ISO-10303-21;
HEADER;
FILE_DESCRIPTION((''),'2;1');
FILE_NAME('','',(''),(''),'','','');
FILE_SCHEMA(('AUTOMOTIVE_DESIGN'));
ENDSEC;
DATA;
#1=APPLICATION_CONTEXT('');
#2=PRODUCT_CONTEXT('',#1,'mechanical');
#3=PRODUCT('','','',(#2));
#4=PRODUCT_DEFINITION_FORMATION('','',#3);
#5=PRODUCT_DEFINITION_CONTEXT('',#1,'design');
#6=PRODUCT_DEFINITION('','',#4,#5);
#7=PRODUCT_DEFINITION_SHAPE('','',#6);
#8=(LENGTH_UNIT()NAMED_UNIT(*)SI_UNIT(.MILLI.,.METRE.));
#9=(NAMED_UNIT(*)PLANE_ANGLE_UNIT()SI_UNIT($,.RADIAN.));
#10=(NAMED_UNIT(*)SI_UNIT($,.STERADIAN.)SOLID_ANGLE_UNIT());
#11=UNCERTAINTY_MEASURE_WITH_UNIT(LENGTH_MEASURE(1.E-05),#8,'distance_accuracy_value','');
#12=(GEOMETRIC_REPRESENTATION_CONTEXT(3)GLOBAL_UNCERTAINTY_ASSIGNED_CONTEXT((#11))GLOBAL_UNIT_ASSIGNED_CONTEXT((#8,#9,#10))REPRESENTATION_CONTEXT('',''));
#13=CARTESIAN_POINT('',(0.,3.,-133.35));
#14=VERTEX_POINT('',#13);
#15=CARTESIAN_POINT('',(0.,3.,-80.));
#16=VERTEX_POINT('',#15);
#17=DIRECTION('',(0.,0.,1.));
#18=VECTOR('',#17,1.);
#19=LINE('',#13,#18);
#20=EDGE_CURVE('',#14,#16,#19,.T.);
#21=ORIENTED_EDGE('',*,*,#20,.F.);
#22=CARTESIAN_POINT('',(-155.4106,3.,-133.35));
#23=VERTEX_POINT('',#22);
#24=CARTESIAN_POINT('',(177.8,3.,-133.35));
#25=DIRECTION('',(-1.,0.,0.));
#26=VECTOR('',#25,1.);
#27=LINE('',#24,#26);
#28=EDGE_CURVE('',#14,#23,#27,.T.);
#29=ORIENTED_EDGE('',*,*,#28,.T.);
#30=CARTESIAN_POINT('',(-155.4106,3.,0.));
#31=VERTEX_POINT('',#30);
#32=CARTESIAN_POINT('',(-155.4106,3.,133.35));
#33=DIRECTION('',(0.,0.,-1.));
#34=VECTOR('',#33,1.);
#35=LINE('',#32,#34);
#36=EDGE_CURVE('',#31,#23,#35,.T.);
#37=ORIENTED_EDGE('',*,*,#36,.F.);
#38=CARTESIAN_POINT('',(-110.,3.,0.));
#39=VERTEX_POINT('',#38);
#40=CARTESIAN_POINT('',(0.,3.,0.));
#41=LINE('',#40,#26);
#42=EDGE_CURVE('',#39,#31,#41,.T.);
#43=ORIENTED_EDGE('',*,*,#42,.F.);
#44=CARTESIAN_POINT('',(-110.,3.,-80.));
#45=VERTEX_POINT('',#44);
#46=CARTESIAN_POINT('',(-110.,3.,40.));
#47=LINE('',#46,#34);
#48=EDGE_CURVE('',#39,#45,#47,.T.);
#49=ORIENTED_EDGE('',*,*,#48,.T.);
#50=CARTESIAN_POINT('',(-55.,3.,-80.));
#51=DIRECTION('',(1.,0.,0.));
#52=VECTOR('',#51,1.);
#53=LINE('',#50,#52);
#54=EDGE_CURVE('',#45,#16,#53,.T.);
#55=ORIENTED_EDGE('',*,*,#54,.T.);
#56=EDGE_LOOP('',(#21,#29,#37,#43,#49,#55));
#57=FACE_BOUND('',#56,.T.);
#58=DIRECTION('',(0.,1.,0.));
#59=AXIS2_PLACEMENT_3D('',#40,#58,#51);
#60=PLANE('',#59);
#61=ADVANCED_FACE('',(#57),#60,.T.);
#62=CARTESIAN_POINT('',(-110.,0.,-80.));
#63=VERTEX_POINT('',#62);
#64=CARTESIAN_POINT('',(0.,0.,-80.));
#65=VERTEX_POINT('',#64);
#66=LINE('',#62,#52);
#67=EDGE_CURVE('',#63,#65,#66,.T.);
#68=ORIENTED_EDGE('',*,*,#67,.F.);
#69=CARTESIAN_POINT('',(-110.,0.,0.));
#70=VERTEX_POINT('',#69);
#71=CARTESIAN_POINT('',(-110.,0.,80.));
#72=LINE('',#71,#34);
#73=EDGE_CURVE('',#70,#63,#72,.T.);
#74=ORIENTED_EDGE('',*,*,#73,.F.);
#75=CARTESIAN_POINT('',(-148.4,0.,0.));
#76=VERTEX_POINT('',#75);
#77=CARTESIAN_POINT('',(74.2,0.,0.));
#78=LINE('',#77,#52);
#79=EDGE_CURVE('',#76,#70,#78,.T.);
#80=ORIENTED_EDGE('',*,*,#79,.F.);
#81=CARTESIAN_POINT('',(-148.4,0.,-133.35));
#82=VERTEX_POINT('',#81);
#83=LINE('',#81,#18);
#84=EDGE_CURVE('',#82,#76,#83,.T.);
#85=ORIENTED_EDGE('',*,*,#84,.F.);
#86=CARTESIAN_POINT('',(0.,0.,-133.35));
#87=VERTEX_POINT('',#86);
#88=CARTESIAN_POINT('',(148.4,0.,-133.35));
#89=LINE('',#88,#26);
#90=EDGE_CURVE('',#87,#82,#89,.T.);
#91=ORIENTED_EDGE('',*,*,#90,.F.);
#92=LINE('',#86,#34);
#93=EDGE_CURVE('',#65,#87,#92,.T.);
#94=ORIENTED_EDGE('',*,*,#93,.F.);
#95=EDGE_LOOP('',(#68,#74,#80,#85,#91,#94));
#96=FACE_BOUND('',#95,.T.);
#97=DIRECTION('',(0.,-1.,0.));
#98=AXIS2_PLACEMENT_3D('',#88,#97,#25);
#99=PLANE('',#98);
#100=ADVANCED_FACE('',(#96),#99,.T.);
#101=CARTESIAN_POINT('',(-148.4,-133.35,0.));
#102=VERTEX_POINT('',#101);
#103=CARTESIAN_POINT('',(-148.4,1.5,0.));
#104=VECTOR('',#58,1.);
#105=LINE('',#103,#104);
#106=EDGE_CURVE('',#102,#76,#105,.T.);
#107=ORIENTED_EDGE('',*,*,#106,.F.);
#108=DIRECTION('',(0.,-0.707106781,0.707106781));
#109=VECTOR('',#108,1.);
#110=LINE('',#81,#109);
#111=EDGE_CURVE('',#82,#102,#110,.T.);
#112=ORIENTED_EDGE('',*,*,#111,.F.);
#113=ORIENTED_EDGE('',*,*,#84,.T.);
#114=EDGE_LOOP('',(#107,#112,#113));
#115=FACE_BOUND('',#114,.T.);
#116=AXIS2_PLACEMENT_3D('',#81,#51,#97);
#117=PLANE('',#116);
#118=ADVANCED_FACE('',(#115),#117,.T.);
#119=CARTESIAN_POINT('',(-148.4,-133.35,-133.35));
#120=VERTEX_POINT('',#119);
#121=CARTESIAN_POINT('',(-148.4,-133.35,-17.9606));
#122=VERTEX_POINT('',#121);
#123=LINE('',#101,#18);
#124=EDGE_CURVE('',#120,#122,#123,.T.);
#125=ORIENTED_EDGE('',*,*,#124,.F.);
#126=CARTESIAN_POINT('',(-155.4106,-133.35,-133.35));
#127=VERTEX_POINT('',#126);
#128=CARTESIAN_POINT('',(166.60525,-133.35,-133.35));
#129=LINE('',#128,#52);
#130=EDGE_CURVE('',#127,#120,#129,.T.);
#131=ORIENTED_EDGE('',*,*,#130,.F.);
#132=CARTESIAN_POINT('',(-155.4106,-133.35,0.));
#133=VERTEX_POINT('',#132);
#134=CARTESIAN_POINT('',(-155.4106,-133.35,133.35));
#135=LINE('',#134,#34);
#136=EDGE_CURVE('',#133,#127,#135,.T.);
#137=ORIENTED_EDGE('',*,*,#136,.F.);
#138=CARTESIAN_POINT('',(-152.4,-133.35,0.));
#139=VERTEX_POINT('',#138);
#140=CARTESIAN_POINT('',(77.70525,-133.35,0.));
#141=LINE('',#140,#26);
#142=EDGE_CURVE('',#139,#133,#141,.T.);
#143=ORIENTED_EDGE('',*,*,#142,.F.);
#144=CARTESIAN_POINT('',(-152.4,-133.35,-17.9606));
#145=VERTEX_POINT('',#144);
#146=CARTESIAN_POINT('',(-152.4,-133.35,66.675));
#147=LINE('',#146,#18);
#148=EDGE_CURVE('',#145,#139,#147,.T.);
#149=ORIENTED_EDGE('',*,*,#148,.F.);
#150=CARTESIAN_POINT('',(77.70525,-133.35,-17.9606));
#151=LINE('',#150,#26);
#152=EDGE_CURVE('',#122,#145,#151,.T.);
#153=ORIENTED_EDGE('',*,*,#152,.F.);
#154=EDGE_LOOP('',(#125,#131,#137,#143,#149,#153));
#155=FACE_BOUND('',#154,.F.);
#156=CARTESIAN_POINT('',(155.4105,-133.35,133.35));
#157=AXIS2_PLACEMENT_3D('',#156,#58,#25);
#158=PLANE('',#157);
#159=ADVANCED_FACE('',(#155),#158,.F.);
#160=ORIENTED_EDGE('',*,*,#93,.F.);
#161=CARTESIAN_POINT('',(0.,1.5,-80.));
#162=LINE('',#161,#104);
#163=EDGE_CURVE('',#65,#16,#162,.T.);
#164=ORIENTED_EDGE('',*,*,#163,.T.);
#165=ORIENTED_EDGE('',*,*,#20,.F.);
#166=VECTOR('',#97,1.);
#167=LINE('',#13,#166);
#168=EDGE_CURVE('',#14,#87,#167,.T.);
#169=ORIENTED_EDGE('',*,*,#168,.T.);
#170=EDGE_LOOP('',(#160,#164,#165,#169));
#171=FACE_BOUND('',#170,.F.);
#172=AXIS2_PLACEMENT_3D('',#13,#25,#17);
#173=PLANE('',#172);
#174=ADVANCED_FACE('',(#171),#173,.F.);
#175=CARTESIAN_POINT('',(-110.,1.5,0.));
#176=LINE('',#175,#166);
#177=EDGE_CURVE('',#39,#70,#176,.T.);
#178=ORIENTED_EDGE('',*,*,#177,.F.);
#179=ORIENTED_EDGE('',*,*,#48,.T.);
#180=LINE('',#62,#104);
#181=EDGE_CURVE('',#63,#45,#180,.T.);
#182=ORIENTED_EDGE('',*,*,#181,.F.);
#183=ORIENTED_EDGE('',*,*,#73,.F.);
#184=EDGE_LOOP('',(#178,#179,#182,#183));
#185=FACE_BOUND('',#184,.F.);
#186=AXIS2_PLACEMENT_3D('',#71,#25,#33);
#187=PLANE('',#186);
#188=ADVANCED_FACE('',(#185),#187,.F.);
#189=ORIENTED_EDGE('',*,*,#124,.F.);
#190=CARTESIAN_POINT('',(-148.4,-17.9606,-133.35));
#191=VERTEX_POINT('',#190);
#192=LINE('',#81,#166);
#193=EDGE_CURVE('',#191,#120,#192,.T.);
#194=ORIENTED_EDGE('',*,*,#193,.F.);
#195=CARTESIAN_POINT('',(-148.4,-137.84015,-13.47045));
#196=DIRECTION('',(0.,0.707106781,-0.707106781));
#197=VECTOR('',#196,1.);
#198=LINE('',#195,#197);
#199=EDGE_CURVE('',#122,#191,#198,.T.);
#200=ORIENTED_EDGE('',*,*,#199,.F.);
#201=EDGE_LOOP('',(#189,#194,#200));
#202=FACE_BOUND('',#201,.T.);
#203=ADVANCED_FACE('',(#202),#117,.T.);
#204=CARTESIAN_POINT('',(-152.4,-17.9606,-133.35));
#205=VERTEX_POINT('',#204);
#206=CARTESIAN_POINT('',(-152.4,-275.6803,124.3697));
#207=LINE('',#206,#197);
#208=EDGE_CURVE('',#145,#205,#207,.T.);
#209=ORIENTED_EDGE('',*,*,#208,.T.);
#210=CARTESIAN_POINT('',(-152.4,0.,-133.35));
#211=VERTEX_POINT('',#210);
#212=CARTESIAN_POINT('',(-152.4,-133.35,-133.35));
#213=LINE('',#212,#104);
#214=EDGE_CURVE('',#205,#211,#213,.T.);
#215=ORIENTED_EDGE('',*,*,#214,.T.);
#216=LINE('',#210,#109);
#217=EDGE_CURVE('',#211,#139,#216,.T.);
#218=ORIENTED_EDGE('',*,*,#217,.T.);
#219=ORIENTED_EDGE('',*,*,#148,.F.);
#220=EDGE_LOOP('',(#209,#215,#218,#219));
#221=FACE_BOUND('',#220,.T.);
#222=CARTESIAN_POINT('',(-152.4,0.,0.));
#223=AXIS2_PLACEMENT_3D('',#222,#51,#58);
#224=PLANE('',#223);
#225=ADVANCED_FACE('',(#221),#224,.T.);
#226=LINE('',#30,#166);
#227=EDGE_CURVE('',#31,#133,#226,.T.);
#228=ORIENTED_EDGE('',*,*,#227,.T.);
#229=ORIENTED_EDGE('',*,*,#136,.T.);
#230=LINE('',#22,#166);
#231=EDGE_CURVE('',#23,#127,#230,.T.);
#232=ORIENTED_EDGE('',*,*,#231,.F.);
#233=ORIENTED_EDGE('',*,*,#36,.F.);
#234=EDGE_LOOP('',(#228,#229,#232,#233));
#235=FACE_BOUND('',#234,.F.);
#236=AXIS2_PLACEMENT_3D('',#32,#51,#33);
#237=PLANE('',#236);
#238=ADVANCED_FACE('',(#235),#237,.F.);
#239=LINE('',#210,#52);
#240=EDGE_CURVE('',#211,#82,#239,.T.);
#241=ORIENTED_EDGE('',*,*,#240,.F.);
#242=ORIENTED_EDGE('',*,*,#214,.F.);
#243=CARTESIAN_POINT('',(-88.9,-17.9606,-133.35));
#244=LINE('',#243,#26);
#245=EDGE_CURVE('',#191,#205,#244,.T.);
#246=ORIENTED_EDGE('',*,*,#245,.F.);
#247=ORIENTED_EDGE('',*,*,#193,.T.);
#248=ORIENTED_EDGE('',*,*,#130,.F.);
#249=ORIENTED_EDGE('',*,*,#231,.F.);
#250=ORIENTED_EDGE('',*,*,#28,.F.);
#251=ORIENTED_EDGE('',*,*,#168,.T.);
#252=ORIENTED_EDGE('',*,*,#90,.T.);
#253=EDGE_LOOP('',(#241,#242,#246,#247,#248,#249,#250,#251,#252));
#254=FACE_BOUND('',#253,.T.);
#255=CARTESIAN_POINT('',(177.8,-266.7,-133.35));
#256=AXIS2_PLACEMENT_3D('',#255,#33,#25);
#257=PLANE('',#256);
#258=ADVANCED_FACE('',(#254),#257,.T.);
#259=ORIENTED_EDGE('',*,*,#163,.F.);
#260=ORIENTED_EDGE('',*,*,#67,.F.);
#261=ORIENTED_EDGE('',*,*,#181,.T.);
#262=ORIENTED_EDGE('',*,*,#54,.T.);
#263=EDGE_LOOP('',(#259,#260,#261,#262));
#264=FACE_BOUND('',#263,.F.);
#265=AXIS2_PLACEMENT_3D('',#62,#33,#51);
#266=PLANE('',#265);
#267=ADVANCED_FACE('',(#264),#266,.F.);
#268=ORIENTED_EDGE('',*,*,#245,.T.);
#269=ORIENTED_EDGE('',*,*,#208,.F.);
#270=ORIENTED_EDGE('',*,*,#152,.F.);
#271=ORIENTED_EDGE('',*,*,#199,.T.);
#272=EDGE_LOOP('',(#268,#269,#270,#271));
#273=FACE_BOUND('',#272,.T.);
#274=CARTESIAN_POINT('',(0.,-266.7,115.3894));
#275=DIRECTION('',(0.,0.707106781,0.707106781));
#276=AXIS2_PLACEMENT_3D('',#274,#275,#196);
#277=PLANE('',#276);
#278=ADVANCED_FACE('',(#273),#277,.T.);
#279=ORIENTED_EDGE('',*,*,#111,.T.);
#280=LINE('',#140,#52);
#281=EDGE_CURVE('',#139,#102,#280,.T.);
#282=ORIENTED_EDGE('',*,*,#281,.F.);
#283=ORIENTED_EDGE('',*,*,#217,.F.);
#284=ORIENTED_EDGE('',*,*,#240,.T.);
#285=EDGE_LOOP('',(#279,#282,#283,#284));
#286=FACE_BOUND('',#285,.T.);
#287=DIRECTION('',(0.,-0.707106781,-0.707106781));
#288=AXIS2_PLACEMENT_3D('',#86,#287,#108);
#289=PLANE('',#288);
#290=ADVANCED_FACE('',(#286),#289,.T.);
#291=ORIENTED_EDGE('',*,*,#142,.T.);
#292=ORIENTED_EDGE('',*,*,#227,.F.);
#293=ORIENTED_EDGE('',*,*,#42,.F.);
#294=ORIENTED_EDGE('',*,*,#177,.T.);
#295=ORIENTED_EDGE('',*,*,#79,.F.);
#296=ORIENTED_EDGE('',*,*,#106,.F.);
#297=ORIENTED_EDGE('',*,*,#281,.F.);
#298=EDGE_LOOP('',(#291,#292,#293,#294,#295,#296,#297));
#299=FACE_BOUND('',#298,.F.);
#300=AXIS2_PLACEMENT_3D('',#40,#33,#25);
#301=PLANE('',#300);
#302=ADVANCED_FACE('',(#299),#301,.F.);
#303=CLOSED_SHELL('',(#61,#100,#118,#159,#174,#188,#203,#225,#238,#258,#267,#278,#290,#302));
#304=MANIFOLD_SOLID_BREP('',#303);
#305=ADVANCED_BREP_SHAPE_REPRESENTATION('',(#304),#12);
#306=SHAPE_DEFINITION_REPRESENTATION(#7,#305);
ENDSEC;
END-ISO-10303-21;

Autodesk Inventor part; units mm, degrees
ref_plane "YZ Plane" through (0, 0, 0) normal (1, 0, 0) x (0, 1, 0)
ref_plane "XZ Plane" through (0, 0, 0) normal (0, 1, 0) x (-1, 0, 0)
ref_plane "XY Plane" through (0, 0, 0) normal (0, 0, 1) x (1, 0, 0)
sketch "Sketch1" plane through (0, 0, 0) normal (0, 1, 0) x (-1, 0, 0)
  line L0 (110, -80) -> (-110, -80)
  line L1 (-110, -80) -> (-110, 80)
  line L2 (-110, 80) -> (110, 80)
  line L3 (110, 80) -> (110, -80)
  line L4 (320.2117, -53.5522) -> (168.036, -53.5522) construction
  line L5 (168.036, -53.5522) -> (168.036, 90.1689) construction
  line L6 (168.036, 90.1689) -> (320.2117, 90.1689) construction
  line L7 (320.2117, 90.1689) -> (320.2117, -53.5522) construction
  line L8 (124.3, -89.75) -> (-124.3, -89.75) construction
  line L9 (-124.3, -89.75) -> (-124.3, 89.75) construction
  line L10 (-124.3, 89.75) -> (124.3, 89.75) construction
  line L11 (124.3, 89.75) -> (124.3, -89.75) construction
  line L12 (124.3, -89.75) -> (-124.3, 89.75) construction
  line L13 (-124.3, -89.75) -> (124.3, 89.75) construction
  line L14 (-152.4, -107.95) -> (152.4, -107.95)
  line L15 (152.4, -107.95) -> (152.4, 107.95)
  line L16 (152.4, 107.95) -> (-152.4, 107.95)
  line L17 (-152.4, 107.95) -> (-152.4, -107.95)
  line L18 (-152.4, -107.95) -> (152.4, 107.95) construction
  line L19 (152.4, -107.95) -> (-152.4, 107.95) construction
  line L20 (177.8, 133.35) -> (177.8, -133.35)
  line L21 (177.8, -133.35) -> (-177.8, -133.35)
  line L22 (-177.8, -133.35) -> (-177.8, 133.35)
  line L23 (-177.8, 133.35) -> (177.8, 133.35)
  point P0 (0, 0)
  dimension "d11" = 220
  dimension "d12" = 160
  dimension "d15" = 248.6
  dimension "d16" = 179.5
  dimension "d18" = 304.8
  dimension "d19" = 215.9
  dimension "d22" = 25.4
extrude "Top" add sketch "Sketch1" along normal blind 25.4 contours L17 L16 L15 L14 | L20 L21 L22 L23
sketch "Sketch3" plane through (177.8, 0, 133.35) normal (1, 0, 0) x (0, 0, -1)
  line L0 (0, 0) -> (0, 25.4) projected
  line L1 (266.7, 0) -> (266.7, 25.4) projected
  line L2 (0, 0) -> (266.7, 0)
  line L3 (266.7, 0) -> (266.7, -266.7)
  line L4 (266.7, -266.7) -> (0, -266.7)
  line L5 (0, -266.7) -> (0, 0)
  point P0 (133.35, 0)
  dimension "d25" = 266.7
extrude "Right" add sketch "Sketch3" against normal blind 50.8
sketch "Sketch4" plane through (-177.8, 0, -133.35) normal (-1, 0, 0) x (0, 0, 1)
  line L0 (0, 0) -> (0, 25.4) projected
  line L1 (266.7, -266.7) -> (266.7, 0) projected
  line L2 (0, 0) -> (266.7, 0)
  line L3 (266.7, 0) -> (266.7, -266.7)
  line L4 (266.7, -266.7) -> (0, -266.7)
  line L5 (0, -266.7) -> (0, 0)
  point P0 (133.35, 0)
  dimension "d28" = 266.7
extrude "Left" add sketch "Sketch4" against normal blind 50.8
sketch "Sketch5" plane through (0, 0, 0) normal (1, 0, 0) x (0, 1, 0)
  line L0 (-266.7, -133.35) -> (25.4, -133.35) projected
  line L1 (-266.7, 133.35) -> (-266.7, -133.35) projected
  line L2 (0, -133.35) -> (-266.7, 133.35)
  line L3 (-266.7, 133.35) -> (-275.6803, 124.3697)
  line L4 (-275.6803, 124.3697) -> (-8.9803, -142.3303)
  line L5 (-8.9803, -142.3303) -> (0, -133.35)
  point P0 (0, 0)
  dimension "d31" = 12.7
extrude "Plexiglass Cut" cut sketch "Sketch5" along normal mid plane 304.8 contours L4 L1 L2 L0 | L0 L5 L4 | L4 L3 L1
sketch "Sketch6" plane through (-177.8, -266.7, -133.35) normal (0, -1, 0) x (1, 0, 0)
  line L0 (0, 0) -> (0, 266.7) projected
  line L1 (355.6, 0) -> (0, 0) projected
  line L2 (0, 266.7) -> (355.6, 266.7)
  line L3 (355.6, 266.7) -> (355.6, 0)
  line L4 (355.6, 0) -> (0, 0)
  line L5 (0, 0) -> (0, 266.7)
  point P0 (177.8, 133.35)
extrude "Bottom" add sketch "Sketch6" along normal blind 25.4
sketch "Sketch9" plane through (0, 25.4, 0) normal (0, 1, 0) x (1, 0, 0)
  line L0 (177.8, -133.35) -> (127, -133.35) projected
  line L1 (177.8, 133.35) -> (-177.8, 133.35) projected
  line L2 (177.8, -133.35) -> (-177.8, -133.35)
  line L3 (-177.8, -133.35) -> (-177.8, 133.35)
  line L4 (-177.8, 133.35) -> (177.8, 133.35)
  line L5 (177.8, 133.35) -> (177.8, -133.35)
  point P0 (0, 0)
extrude "Top Flattening" cut sketch "Sketch9" against normal blind 22.4
sketch "Sketch10" plane through (0, 3, 0) normal (0, 1, 0) x (1, 0, 0)
  line L0 (-177.8, -133.35) -> (-177.8, 133.35) projected
  line L1 (-155.4106, 133.35) -> (-177.8, 133.35)
  line L2 (-177.8, 133.35) -> (-177.8, -133.35)
  line L3 (-177.8, -133.35) -> (-155.4106, -133.35)
  line L4 (-155.4106, -133.35) -> (-155.4106, 133.35)
  line L5 (177.8, 133.35) -> (177.8, -133.35)
  line L6 (177.8, -133.35) -> (155.4106, -133.35)
  line L7 (155.4106, -133.35) -> (155.4106, 133.35)
  line L8 (155.4106, 133.35) -> (177.8, 133.35)
  line L9 (152.4, -115.3895) -> (152.4, 133.35) projected
  point P0 (0, 0)
  point P1 (-177.8, 0)
  dimension "d48" = 22.3894
  dimension "d49" = 22.3894
extrude "Outer Side Flattening" cut sketch "Sketch10" against normal through all
sketch "Sketch11" plane through (-177.8, -292.1, -133.35) normal (0, -1, 0) x (1, 0, 0)
  line L0 (22.3894, 0) -> (333.2106, 0) projected
  line L1 (333.2106, 0) -> (22.3894, 0)
  line L2 (22.3894, 0) -> (22.3894, 266.7)
  line L3 (22.3894, 266.7) -> (333.2106, 266.7)
  line L4 (333.2106, 266.7) -> (333.2106, 0)
  point P0 (177.8, 133.35)
extrude "Bottom Flattening" cut sketch "Sketch11" against normal blind 22.4
sketch "Sketch12" plane through (155.4106, 3, -133.35) normal (0, 0, -1) x (-1, 0, 0)
  line L0 (155.4106, -3) -> (155.4106, -269.7) construction
  line L1 (7.0106, -269.7) -> (7.0106, -3)
  line L2 (7.0106, -3) -> (303.8106, -3)
  line L3 (303.8106, -3) -> (303.8106, -269.7)
  line L4 (303.8106, -269.7) -> (7.0106, -269.7)
  line L5 (7.0106, -269.7) -> (303.8106, -3) construction
  line L6 (7.0106, -3) -> (303.8106, -269.7) construction
  point P0 (155.4106, -136.35)
  point P1 (155.4106, -3)
  dimension "d54" = 296.8
extrude "Inner Flattening" cut sketch "Sketch12" against normal through all
sketch "Sketch13" plane through (-155.4106, 3, 133.35) normal (0, 0, 1) x (1, 0, 0)
  line L0 (310.8211, -272.7) -> (310.8211, 0) projected
  line L1 (0, -272.7) -> (310.8211, -272.7) projected
  line L2 (310.8211, -136.35) -> (0, -136.35)
  line L3 (0, -136.35) -> (0, -272.7)
  line L4 (0, -272.7) -> (310.8211, -272.7)
  line L5 (310.8211, -272.7) -> (310.8211, -136.35)
  point P0 (155.4106, -3)
extrude "Bottom Cut" cut sketch "Sketch13" against normal through all
sketch "Sketch14" plane through (0, 3, 0) normal (0, 1, 0) x (1, 0, 0)
  line L0 (-155.4106, 133.35) -> (155.4106, 133.35) projected
  line L1 (0, 0) -> (-155.4106, 0)
  line L2 (-155.4106, 0) -> (-155.4106, 133.35)
  line L3 (-155.4106, 133.35) -> (0, 133.35)
  line L4 (0, 133.35) -> (0, 0)
  line L5 (155.4106, -133.35) -> (-155.4106, -133.35) projected
  line L6 (-155.4106, 133.35) -> (155.4106, 133.35)
  line L7 (155.4106, 133.35) -> (155.4106, -133.35)
  line L8 (155.4106, -133.35) -> (-155.4106, -133.35)
  line L9 (-155.4106, -133.35) -> (-155.4106, 133.35)
  point P0 (155.4106, 133.35)
extrude "Quarter Cut" cut sketch "Sketch14" against normal through all contours L0 L7 L5 L9 L1 L4
properties part number "Apple iPad 2022 Hologram"
